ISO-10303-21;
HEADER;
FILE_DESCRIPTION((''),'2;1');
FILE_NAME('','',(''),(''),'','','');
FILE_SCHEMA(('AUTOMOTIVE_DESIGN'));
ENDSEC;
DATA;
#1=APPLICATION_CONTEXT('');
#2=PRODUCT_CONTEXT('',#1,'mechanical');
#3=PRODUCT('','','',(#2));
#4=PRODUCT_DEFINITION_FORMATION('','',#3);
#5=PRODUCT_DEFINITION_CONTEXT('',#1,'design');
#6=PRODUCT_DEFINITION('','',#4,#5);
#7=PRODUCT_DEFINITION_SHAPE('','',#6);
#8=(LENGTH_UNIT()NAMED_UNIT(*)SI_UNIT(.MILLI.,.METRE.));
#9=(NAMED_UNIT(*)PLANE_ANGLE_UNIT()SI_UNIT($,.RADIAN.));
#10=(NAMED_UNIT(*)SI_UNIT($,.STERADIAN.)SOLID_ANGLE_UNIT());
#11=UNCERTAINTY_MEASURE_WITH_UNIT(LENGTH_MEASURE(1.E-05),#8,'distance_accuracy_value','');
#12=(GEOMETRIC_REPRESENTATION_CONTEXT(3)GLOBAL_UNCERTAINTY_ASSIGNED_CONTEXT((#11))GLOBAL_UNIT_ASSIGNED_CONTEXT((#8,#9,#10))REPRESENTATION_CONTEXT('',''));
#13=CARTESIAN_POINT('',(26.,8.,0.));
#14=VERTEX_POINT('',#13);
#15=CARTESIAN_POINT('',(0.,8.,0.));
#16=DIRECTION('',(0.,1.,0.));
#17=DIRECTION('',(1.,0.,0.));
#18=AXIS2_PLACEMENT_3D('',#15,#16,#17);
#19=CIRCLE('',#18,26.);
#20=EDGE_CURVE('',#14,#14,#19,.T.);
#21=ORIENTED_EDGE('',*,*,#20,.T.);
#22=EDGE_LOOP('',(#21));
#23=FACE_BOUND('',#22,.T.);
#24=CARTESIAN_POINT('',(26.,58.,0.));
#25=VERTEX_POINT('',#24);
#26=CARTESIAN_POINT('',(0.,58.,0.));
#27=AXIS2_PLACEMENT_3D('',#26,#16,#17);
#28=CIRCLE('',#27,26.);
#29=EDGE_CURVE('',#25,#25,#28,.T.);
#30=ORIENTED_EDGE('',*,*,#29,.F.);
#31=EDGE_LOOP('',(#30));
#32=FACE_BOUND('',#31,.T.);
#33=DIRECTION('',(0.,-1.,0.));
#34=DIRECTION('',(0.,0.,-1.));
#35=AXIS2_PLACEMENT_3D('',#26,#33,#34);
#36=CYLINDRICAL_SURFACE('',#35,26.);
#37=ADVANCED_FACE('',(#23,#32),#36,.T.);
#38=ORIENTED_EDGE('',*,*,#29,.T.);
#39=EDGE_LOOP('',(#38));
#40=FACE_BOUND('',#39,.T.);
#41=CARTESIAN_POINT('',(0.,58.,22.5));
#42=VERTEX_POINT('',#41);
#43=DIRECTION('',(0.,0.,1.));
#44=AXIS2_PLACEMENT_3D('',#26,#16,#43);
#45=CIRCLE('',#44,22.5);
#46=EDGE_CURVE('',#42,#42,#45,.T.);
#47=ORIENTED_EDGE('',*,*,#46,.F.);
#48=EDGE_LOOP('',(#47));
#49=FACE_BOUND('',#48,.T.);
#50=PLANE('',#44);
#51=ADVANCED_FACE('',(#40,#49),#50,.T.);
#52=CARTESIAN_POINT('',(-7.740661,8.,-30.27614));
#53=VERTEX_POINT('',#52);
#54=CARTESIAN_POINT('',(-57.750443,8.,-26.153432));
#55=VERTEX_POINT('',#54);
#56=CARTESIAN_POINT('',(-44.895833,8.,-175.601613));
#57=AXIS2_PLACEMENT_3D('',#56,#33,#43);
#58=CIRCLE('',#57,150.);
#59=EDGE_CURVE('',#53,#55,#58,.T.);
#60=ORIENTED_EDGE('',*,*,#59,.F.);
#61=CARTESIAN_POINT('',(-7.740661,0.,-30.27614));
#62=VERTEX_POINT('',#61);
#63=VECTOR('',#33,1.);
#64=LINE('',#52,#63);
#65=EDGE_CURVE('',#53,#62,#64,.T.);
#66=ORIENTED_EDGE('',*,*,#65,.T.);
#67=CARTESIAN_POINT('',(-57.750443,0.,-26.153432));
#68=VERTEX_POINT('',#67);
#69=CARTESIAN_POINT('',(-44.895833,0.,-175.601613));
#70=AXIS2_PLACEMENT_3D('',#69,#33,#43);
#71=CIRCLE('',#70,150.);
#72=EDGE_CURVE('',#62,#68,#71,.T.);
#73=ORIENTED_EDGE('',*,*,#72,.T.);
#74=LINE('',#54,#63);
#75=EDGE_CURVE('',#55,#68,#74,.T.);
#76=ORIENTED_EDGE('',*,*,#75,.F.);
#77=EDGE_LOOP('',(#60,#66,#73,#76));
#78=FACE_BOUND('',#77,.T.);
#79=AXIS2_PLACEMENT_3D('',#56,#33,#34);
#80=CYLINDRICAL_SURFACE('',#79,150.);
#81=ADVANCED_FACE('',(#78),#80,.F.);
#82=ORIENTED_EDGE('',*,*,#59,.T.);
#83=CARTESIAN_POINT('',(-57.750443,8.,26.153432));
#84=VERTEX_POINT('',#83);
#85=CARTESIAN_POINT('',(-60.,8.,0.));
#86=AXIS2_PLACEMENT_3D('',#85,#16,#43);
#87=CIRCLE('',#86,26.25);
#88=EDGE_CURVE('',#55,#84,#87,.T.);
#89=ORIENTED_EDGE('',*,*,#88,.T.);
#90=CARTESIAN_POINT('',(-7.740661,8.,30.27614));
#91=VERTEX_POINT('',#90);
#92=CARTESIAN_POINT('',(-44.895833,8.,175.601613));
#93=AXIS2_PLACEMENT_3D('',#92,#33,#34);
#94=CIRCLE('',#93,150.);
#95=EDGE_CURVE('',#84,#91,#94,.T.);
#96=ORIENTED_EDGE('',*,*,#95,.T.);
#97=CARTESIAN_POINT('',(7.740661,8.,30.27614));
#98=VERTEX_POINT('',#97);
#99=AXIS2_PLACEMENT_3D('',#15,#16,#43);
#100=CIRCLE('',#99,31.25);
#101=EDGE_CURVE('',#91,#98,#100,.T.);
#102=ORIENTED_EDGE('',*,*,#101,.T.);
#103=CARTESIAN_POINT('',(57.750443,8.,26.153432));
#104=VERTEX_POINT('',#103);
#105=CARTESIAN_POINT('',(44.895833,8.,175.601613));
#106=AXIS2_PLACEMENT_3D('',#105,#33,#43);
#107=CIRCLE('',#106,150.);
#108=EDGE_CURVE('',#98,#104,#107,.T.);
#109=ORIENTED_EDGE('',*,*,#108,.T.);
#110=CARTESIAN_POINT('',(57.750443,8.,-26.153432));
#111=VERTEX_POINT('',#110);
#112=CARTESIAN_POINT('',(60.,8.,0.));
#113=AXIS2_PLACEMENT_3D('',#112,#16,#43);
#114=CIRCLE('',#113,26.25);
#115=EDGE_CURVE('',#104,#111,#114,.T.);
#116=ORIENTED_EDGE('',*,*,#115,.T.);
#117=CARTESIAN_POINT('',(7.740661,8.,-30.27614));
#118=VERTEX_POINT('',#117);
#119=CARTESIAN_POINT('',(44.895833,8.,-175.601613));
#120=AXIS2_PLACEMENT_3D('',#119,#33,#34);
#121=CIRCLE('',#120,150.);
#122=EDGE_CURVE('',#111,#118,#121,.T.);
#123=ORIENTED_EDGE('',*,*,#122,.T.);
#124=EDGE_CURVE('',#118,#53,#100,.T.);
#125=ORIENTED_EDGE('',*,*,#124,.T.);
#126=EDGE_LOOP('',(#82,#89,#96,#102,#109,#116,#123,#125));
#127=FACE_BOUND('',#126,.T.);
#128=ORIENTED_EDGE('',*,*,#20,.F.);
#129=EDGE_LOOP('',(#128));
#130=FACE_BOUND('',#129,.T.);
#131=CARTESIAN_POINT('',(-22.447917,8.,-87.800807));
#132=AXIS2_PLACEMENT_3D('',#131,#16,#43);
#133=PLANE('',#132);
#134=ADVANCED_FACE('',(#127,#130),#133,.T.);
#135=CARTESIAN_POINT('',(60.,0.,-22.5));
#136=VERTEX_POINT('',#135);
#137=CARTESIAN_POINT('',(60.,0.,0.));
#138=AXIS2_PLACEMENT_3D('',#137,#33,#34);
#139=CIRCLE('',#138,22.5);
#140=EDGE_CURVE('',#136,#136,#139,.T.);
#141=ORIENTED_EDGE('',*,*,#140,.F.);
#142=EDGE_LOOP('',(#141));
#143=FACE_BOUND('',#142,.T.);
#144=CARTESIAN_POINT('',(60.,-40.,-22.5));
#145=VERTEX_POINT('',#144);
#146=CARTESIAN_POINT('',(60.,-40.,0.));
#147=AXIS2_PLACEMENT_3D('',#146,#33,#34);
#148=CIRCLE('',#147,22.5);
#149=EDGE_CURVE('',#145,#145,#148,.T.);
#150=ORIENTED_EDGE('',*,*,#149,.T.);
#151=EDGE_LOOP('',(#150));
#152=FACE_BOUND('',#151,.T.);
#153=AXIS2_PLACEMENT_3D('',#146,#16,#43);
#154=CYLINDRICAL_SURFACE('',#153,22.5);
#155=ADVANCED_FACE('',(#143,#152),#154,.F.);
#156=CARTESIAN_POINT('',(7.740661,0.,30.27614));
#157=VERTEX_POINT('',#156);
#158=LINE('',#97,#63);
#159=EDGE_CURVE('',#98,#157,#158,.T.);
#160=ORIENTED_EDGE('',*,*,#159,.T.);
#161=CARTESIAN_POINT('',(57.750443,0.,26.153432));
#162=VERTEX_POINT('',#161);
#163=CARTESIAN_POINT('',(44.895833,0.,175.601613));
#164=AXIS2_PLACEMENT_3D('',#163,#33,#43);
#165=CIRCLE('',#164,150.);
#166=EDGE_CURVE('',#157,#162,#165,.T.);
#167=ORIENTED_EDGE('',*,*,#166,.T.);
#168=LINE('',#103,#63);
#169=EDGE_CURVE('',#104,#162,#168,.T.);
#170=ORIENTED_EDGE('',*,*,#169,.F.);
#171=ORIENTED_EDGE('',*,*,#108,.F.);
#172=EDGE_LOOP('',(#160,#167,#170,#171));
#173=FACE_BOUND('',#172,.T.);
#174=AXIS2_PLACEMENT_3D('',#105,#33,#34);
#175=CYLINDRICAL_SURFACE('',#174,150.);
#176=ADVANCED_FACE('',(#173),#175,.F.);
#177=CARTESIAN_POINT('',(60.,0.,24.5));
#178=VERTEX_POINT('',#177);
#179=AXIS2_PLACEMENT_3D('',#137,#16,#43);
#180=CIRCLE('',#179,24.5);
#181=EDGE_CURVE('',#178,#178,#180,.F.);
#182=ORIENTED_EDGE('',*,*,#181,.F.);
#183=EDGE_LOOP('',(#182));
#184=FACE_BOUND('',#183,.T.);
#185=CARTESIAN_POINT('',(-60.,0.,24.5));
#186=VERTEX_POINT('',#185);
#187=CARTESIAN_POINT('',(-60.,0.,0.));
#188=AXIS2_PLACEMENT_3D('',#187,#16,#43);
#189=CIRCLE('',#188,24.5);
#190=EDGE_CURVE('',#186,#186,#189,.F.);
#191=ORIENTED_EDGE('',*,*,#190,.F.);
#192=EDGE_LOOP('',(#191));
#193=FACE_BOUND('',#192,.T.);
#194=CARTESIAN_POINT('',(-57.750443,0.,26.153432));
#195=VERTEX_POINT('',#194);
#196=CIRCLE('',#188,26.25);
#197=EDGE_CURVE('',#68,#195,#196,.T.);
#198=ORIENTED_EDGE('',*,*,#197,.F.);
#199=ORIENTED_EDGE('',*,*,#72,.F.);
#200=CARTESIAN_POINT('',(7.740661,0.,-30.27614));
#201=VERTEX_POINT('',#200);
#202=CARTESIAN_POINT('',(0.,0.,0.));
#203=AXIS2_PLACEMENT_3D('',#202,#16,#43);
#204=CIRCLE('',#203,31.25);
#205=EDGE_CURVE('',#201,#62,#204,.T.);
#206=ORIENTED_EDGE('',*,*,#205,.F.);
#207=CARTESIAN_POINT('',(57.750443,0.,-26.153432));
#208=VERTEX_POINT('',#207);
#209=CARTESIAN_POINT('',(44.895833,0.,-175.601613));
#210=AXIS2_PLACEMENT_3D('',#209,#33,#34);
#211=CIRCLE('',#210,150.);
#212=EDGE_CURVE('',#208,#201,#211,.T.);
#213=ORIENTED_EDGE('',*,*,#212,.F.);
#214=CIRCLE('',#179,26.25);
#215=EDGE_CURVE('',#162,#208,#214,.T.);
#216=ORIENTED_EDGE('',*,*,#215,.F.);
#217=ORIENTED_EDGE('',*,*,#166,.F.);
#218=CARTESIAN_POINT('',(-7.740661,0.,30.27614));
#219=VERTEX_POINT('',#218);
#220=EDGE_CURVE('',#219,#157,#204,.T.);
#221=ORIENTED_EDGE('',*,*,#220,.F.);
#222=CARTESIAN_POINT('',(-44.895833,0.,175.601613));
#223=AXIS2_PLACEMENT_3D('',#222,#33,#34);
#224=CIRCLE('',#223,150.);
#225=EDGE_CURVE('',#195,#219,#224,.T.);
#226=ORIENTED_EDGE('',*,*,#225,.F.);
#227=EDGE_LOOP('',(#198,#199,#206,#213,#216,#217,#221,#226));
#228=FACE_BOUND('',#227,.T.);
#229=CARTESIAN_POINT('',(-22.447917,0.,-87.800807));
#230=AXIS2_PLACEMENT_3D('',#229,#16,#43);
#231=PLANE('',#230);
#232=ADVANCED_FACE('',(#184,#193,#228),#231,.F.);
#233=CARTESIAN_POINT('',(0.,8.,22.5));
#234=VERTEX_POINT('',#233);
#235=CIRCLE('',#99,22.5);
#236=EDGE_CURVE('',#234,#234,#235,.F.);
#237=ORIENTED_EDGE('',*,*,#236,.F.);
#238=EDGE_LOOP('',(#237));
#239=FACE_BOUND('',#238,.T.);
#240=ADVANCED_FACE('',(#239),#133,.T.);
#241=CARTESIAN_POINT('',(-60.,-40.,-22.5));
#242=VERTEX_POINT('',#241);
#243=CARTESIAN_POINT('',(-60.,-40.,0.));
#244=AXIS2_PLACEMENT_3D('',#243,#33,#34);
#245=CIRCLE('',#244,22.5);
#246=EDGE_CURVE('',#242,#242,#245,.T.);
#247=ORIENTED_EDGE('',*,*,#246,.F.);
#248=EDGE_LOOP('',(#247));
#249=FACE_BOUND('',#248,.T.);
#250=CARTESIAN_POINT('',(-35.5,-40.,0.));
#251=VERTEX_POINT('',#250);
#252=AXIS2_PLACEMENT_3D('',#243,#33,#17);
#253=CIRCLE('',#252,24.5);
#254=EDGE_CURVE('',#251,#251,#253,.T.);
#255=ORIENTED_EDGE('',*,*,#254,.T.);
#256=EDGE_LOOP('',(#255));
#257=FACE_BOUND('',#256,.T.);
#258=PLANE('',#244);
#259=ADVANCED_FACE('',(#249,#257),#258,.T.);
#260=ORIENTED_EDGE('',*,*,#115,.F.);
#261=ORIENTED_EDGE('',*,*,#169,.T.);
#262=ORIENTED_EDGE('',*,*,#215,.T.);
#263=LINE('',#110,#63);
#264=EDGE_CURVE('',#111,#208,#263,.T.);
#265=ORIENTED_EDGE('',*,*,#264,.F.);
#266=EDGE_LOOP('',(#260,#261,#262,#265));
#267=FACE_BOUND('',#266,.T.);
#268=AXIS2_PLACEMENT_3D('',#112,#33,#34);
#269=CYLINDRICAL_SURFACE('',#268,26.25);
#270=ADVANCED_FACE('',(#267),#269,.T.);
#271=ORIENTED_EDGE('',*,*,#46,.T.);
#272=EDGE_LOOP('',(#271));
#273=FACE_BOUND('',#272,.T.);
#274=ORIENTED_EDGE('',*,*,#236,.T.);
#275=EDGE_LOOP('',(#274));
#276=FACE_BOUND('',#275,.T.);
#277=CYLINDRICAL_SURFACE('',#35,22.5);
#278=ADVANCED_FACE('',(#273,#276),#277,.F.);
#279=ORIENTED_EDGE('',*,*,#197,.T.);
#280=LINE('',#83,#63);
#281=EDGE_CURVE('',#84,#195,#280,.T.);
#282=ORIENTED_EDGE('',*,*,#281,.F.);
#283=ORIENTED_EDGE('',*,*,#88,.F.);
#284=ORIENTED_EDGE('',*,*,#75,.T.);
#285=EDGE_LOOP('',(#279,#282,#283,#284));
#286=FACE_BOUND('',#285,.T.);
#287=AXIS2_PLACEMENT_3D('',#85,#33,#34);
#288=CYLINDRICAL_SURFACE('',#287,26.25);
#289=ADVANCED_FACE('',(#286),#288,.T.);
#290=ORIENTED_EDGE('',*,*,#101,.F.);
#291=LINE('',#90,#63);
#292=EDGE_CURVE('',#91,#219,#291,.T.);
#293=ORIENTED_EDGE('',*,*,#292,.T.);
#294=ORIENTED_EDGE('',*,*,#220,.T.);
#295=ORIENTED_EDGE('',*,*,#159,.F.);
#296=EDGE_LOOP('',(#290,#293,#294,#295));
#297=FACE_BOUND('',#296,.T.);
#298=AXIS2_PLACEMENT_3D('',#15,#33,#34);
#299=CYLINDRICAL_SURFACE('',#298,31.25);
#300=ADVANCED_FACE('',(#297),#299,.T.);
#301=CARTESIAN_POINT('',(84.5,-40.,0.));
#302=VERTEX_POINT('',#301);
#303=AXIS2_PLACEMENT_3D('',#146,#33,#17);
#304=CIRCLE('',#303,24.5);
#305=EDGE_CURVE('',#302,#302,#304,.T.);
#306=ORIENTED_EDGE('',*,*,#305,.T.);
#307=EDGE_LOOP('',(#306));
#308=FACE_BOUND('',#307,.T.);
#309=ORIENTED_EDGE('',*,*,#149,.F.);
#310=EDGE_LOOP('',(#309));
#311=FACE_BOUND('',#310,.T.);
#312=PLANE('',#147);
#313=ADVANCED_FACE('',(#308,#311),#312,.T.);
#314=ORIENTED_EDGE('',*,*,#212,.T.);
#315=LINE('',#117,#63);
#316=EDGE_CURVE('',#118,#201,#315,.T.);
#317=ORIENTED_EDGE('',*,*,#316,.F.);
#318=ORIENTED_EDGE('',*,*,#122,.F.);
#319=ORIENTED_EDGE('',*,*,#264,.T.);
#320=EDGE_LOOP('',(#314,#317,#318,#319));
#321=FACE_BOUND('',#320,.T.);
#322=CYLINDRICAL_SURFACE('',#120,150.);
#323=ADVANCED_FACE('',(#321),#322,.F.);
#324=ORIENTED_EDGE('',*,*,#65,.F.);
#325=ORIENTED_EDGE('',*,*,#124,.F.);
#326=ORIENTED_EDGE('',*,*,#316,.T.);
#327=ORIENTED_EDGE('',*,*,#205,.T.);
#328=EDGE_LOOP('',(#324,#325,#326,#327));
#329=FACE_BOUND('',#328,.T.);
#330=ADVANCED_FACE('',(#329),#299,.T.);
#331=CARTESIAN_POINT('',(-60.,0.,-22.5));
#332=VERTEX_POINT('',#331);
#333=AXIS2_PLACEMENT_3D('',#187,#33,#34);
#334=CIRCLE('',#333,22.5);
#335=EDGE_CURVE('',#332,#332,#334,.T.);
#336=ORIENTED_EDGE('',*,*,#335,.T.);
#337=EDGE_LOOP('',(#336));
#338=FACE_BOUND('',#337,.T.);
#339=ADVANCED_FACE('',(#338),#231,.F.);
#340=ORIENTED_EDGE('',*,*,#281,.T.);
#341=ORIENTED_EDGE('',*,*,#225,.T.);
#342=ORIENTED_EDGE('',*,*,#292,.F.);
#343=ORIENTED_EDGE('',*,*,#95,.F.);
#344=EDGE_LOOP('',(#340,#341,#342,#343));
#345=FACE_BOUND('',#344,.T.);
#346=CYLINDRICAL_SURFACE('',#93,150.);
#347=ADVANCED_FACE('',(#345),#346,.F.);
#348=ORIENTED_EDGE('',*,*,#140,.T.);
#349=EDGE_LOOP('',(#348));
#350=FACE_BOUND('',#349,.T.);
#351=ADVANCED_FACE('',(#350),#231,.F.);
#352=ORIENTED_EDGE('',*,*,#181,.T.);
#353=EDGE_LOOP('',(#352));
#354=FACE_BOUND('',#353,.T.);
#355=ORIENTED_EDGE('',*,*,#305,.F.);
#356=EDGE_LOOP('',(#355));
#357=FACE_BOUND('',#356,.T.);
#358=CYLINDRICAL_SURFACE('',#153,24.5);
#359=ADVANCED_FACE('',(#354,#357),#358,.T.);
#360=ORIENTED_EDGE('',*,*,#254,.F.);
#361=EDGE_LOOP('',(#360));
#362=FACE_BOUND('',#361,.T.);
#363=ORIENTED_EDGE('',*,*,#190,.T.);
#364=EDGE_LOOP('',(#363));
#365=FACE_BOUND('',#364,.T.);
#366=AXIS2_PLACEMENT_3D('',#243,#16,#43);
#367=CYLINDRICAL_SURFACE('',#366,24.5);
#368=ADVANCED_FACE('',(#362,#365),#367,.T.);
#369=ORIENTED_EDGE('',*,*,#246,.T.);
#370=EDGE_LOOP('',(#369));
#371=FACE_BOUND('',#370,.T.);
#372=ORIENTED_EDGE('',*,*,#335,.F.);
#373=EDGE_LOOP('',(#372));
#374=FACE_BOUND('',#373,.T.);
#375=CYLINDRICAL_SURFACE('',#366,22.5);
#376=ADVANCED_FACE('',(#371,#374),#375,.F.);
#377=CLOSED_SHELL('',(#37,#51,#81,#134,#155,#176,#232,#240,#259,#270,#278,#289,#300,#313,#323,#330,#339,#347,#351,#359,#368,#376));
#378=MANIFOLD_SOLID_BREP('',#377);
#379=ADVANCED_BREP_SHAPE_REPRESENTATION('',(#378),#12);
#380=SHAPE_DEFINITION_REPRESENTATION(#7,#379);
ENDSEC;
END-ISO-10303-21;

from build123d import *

# Parameters (mm, degrees)
BOSS_EXTRUDE1_DEPTH = 8
SKETCH2_R           = 26
SKETCH2_R_2         = 22.5
EXTRUDE_THIN1_DEPTH = 50
SKETCH3_R           = 24.5
SKETCH3_R_2         = 22.5
EXTRUDE_THIN2_DEPTH = 40


with BuildPart() as part:
    # Sketch1 → Boss-Extrude1 (new body)
    with BuildSketch(Plane(origin=(0, 0, 0), x_dir=(1, 0, 0), z_dir=(0, 1, 0))):
        with BuildLine():
            ThreePointArc((-7.74066092, -30.276140252), (0, -31.25), (7.74066092, -30.276140252))
            ThreePointArc((7.74066092, -30.276140252), (32.571933158, -26.108732409), (57.750443262, -26.153431792))
            ThreePointArc((57.750443262, -26.153431792), (86.25, 0), (57.750443262, 26.153431792))
            ThreePointArc((57.750443262, 26.153431792), (32.571933158, 26.108732409), (7.74066092, 30.276140252))
            ThreePointArc((7.74066092, 30.276140252), (0, 31.25), (-7.74066092, 30.276140252))
            ThreePointArc((-7.74066092, 30.276140252), (-32.571933158, 26.108732409), (-57.750443262, 26.153431792))
            ThreePointArc((-57.750443262, 26.153431792), (-86.25, 0), (-57.750443262, -26.153431792))
            ThreePointArc((-57.750443262, -26.153431792), (-32.571933158, -26.108732409), (-7.74066092, -30.276140252))
        make_face()
    extrude(amount=BOSS_EXTRUDE1_DEPTH)

    # Sketch2 → Extrude-Thin1 (add)
    with BuildSketch(Plane(origin=(0, 8, 0), x_dir=(1, 0, 0), z_dir=(0, 1, 0))):
        Circle(SKETCH2_R)
        Circle(SKETCH2_R_2, mode=Mode.SUBTRACT)
    extrude(amount=EXTRUDE_THIN1_DEPTH)

    # Sketch3 → Extrude-Thin2 (add)
    # profile 1 of 2: a face of its own
    with BuildSketch(Plane.XZ):
        with Locations((-60, 0)):
            Circle(SKETCH3_R)
        with Locations((-60, 0)):
            Circle(SKETCH3_R_2, mode=Mode.SUBTRACT)
    # profile 2 of 2: a face of its own
    with BuildSketch(Plane.XZ):
        with Locations((60, 0)):
            Circle(SKETCH3_R)
        with Locations((60, 0)):
            Circle(SKETCH3_R_2, mode=Mode.SUBTRACT)
    extrude(amount=EXTRUDE_THIN2_DEPTH)


solid = part.part
